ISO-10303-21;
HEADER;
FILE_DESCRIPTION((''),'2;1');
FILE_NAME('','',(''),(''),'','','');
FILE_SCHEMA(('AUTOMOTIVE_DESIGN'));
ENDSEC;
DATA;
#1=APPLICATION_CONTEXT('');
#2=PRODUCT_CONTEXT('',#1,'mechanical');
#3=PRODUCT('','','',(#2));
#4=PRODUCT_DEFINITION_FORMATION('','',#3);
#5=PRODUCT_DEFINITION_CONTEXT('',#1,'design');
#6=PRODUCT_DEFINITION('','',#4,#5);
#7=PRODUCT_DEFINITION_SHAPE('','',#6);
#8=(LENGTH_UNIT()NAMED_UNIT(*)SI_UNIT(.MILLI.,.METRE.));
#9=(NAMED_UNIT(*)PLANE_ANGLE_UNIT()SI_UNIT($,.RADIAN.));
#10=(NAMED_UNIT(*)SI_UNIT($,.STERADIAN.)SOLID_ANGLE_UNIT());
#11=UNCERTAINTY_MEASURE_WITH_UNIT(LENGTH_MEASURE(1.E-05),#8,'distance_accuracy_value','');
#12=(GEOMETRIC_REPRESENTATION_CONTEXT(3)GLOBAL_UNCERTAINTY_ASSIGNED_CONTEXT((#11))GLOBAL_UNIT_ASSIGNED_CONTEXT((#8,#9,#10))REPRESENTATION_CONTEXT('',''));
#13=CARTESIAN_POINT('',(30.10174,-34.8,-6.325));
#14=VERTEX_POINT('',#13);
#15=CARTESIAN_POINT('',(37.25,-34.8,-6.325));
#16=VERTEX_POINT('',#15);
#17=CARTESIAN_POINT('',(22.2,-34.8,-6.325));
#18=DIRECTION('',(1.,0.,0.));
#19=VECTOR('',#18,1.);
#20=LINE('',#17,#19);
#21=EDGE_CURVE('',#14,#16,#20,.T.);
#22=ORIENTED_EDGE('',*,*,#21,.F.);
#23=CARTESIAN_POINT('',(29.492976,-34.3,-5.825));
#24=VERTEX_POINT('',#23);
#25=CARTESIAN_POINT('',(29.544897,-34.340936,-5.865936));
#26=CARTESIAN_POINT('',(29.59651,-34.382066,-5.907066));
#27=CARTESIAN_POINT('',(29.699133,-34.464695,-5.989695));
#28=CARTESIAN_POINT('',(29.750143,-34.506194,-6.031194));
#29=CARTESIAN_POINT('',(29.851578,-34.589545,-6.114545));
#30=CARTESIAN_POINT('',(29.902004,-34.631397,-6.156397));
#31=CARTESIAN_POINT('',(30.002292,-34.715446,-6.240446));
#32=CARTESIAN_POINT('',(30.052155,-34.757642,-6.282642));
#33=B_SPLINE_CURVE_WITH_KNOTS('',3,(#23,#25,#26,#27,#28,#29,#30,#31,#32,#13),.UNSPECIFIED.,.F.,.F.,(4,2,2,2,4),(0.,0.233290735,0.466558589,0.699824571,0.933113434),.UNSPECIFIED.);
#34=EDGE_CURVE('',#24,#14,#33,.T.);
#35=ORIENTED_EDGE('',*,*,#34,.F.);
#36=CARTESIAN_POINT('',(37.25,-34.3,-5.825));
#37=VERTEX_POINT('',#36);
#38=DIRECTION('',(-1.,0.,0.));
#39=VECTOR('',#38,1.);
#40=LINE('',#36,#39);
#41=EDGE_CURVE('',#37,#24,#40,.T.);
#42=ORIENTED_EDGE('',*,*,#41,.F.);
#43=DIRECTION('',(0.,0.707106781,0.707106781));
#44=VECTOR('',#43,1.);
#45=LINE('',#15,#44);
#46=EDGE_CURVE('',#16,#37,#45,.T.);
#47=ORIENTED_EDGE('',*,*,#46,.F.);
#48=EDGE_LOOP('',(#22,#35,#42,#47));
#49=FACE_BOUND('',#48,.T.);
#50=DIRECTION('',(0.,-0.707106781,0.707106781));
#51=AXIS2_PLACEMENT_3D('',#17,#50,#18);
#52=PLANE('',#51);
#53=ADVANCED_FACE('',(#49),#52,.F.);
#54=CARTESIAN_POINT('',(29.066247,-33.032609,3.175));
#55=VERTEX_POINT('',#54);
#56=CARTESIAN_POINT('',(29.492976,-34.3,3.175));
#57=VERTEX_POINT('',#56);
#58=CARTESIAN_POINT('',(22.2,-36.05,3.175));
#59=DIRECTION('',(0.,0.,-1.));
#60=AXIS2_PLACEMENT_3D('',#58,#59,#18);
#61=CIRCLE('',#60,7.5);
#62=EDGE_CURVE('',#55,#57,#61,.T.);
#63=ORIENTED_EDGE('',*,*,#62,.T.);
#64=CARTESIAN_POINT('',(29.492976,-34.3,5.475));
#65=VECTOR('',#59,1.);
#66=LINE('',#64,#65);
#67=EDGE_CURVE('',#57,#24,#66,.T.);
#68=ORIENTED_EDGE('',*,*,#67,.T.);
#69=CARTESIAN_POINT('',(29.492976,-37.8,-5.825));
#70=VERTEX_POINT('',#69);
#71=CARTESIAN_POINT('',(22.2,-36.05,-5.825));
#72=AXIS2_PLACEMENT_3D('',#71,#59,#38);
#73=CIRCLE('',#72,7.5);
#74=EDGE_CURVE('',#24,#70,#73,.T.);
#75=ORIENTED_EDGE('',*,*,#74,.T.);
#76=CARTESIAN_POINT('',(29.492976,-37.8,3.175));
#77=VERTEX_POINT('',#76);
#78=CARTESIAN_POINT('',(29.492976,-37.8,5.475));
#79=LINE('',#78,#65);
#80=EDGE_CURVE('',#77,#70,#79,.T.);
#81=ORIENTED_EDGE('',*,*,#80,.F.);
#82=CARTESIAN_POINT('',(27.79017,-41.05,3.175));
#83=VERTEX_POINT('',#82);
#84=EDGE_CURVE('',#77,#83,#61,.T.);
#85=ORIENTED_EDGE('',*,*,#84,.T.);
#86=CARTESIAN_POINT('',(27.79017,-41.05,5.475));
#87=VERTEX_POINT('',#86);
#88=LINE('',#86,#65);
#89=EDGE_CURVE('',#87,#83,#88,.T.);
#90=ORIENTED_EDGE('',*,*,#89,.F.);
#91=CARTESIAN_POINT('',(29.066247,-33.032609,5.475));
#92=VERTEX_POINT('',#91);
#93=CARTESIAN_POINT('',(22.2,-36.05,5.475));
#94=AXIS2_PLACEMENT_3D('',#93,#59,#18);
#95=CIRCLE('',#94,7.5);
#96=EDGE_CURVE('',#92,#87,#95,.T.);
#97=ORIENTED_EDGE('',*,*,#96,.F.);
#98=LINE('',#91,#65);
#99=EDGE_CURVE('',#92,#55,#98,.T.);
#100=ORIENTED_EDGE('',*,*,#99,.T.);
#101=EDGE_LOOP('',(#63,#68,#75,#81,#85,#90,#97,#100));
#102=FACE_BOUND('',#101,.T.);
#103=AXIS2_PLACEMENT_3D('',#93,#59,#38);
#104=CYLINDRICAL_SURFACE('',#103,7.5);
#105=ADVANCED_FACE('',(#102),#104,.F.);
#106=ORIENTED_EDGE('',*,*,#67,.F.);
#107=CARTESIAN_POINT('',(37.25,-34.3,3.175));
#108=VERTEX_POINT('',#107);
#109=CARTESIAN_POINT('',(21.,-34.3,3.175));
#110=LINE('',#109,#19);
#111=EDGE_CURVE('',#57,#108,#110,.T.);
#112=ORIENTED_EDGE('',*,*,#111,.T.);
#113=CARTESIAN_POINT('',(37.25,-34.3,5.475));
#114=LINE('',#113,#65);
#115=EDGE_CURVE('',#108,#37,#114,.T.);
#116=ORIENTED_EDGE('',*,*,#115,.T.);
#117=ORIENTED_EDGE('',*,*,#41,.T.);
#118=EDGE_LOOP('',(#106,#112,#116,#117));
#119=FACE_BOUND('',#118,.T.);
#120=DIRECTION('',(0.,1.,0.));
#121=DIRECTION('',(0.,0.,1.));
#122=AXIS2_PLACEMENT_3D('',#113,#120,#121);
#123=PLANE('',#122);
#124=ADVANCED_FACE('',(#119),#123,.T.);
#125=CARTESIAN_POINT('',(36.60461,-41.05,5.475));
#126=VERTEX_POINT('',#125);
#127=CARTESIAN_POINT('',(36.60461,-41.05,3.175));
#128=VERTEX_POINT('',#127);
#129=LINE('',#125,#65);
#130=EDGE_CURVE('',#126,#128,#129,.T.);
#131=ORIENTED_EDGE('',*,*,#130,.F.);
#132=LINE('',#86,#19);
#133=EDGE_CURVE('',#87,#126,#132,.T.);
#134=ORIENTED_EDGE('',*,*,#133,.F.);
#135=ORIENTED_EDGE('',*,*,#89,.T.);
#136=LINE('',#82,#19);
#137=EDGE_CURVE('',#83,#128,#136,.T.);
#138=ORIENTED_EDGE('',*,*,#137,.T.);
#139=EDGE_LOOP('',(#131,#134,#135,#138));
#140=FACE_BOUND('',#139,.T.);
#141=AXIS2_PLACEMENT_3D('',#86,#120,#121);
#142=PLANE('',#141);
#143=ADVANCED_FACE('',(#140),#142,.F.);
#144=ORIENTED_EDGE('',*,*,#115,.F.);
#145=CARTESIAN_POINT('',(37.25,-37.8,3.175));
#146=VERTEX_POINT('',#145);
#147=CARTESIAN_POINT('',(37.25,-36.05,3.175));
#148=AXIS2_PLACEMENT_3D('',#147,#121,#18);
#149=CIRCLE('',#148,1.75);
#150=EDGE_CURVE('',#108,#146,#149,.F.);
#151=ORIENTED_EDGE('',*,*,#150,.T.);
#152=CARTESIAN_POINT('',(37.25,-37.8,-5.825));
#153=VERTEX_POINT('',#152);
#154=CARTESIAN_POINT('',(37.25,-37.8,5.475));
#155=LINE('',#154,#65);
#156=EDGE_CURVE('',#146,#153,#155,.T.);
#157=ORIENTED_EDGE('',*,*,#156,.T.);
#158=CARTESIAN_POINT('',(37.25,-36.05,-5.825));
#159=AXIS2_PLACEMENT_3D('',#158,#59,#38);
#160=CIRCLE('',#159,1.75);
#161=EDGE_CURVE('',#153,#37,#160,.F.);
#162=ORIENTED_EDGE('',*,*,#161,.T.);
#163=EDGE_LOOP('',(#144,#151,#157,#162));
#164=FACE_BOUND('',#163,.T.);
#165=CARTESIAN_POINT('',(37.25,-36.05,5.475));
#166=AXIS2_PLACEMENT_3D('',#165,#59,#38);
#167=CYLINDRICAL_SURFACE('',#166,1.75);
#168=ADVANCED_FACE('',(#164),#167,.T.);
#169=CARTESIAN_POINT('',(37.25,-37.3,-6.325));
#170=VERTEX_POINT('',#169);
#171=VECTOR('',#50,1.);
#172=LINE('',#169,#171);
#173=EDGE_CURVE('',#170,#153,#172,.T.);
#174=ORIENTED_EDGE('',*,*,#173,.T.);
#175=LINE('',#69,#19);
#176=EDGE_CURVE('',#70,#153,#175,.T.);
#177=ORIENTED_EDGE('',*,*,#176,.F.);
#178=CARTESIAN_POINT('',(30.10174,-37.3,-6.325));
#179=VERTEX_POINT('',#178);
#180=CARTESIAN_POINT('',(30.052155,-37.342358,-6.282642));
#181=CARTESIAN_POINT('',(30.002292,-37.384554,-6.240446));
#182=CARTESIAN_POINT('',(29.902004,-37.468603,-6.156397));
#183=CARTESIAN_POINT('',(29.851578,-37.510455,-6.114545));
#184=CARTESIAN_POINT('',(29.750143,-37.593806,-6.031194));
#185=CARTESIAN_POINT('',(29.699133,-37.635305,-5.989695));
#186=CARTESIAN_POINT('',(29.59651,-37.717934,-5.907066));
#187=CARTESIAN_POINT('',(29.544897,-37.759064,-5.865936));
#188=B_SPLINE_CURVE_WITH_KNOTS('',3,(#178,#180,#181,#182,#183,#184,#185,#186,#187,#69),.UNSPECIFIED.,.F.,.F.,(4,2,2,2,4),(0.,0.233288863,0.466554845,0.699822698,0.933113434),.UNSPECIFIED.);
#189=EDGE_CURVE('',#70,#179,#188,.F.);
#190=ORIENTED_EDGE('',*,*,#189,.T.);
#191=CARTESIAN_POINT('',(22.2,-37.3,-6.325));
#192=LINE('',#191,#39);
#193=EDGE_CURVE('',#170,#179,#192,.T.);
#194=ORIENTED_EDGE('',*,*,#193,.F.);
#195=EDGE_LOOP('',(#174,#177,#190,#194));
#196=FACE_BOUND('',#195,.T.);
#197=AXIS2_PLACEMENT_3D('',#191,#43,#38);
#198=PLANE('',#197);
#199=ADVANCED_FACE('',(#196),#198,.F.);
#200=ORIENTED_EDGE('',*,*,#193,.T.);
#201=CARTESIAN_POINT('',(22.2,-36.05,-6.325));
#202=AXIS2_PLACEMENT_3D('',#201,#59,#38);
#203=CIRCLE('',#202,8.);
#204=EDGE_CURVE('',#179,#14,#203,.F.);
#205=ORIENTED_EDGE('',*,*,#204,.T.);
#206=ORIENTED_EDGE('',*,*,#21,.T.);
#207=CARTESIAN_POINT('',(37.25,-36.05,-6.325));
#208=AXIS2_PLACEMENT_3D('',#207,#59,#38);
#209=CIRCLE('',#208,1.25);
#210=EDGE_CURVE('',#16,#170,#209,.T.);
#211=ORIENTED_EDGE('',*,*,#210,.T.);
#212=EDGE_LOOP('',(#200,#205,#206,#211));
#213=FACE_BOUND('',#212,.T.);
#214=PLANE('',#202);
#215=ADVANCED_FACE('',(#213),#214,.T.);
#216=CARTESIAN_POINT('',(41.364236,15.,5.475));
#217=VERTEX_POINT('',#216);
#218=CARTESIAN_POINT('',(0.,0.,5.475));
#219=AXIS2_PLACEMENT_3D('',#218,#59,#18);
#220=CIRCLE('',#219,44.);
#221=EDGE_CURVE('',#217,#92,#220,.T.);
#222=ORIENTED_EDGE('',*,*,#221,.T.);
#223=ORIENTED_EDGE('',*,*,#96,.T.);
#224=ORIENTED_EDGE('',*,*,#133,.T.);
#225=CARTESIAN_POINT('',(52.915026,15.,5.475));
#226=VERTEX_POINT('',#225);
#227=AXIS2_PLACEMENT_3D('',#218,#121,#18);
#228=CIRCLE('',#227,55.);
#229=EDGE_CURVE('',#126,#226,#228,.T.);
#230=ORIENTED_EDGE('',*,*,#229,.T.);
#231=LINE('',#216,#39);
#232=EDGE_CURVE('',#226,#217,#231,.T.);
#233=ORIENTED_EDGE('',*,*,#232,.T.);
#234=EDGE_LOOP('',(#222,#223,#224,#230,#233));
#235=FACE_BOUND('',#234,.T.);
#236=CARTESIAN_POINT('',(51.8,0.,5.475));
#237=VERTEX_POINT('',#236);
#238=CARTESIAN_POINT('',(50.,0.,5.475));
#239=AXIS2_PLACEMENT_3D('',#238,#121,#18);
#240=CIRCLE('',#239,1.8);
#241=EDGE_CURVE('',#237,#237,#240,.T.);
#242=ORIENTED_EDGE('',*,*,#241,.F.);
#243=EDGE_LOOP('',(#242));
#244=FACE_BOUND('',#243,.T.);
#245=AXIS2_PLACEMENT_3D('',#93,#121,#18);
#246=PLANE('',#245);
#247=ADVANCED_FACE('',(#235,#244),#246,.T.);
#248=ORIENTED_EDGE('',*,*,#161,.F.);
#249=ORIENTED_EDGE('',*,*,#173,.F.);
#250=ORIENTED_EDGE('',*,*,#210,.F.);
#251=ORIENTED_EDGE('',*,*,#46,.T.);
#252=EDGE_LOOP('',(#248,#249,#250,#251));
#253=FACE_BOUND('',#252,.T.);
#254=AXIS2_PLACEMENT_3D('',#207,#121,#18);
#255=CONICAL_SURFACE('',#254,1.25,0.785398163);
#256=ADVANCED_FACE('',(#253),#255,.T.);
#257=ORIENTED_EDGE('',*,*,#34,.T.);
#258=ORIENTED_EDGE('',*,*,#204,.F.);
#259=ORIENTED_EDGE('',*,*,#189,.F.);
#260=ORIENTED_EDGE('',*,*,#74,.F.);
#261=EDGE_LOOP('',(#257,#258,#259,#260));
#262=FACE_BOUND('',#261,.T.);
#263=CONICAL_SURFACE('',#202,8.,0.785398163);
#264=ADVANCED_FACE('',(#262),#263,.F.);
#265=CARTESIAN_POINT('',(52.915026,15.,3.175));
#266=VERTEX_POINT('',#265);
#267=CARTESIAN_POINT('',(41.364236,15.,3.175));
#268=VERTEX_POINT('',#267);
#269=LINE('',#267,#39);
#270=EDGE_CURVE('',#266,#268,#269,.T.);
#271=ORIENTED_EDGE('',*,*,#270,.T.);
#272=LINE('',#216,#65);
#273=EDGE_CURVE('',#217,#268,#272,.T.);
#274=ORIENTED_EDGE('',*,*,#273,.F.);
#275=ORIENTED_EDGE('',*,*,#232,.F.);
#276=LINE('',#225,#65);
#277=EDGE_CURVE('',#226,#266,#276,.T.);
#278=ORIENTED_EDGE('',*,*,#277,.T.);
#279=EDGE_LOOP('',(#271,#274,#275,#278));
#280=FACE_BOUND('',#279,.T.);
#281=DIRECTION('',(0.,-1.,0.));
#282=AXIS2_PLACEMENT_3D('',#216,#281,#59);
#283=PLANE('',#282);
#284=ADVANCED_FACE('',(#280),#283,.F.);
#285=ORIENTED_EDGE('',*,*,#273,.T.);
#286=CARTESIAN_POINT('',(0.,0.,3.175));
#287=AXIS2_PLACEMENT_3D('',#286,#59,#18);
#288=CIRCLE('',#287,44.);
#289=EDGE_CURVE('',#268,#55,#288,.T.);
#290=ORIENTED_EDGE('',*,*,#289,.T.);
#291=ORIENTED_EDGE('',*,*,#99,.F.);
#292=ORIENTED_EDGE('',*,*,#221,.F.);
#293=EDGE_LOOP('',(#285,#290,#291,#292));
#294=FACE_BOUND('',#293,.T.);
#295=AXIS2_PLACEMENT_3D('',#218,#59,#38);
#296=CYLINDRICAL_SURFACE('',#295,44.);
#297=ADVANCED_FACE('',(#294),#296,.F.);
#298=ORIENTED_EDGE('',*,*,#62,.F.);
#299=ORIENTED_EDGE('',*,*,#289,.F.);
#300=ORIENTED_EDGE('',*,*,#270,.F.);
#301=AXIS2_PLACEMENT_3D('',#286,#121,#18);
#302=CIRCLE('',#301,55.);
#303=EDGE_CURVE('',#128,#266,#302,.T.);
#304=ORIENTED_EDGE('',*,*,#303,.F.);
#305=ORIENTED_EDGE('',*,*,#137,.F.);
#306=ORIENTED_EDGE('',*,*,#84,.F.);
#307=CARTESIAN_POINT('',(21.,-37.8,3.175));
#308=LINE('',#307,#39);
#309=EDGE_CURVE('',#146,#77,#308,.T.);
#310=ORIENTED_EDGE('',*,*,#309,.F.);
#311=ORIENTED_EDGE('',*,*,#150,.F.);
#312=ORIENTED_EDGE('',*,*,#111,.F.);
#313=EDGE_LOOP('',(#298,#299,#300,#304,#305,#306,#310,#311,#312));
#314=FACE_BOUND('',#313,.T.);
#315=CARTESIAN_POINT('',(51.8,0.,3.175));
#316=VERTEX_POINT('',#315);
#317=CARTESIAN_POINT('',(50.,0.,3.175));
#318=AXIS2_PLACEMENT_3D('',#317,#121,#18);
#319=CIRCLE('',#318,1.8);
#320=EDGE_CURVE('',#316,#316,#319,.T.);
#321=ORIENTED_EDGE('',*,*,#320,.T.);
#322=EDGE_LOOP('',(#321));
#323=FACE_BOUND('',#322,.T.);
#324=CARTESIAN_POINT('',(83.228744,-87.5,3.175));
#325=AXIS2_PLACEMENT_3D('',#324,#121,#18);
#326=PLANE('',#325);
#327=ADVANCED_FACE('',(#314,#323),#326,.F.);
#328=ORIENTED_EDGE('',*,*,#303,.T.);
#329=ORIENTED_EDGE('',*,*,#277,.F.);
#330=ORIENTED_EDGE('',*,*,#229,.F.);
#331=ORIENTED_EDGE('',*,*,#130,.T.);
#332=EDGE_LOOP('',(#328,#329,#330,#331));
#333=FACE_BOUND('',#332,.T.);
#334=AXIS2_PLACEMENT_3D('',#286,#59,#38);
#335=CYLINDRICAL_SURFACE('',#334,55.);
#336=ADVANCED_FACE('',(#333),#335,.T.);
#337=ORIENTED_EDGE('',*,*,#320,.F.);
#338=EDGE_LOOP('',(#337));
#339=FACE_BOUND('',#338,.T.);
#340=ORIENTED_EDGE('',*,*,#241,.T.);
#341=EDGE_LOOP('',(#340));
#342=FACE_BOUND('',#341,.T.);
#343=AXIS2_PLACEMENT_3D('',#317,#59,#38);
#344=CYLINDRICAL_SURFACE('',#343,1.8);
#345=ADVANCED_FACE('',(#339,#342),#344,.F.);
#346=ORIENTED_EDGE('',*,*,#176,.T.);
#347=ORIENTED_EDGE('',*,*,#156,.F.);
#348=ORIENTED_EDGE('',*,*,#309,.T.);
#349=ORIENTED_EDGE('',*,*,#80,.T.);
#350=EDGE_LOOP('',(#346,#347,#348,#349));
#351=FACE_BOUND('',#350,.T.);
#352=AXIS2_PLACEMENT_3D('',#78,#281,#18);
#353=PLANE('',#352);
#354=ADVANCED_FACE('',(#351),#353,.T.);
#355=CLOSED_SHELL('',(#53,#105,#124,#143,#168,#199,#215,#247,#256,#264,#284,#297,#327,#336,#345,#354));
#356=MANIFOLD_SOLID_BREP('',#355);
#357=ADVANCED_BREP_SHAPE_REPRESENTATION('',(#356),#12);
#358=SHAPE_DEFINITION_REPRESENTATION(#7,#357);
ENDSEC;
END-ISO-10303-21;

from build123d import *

# Parameters (mm, degrees)
SKETCH1_R                = 2.150000002
SKETCH1_R_2              = 35
SKETCH1_R_3              = 1.8
SKETCH1_R_4              = 7.575
BOSS_EXTRUDE1_DEPTH      = 3.175
SKETCH3_R                = 1.35
SKETCH3_R_2              = 5
SKETCH3_W                = 18
SKETCH3_H                = 3.5
CUT_EXTRUDE1_DEPTH       = 3.175
CUT_EXTRUDE2_DEPTH       = 3.175
SKETCH6_R                = 7.5
CUT_EXTRUDE5_DEPTH       = 10
FILLET1_R                = 1.75
SKETCH7_R                = 1.75
CUT_EXTRUDE6_DEPTH       = 10
SKETCH10_R               = 1.8
BOSS_EXTRUDE2_DEPTH      = 2.3
CUT_EXTRUDE7_DEPTH       = 118.49445714
CUT_EXTRUDE7_DEPTH_BACK  = 118.49445714
SKETCH11_W               = 179.014242855
SKETCH11_H               = 40.200555742
BOSS_EXTRUDE3_DEPTH      = 9.5
BOSS_EXTRUDE3_DEPTH_BACK = 2.3
CHAMFER1_SIZE            = 0.5


with BuildPart() as part:
    # Sketch1 → Boss-Extrude1 (new body)
    with BuildSketch(Plane.XY):
        with BuildLine():
            Line((69.097259206, -18.820036388), (54.057762213, -10.136978751))
            ThreePointArc((54.057762213, -10.136978751), (47.631397163, 27.499999965), (18.250000006, 51.883884719))
            Line((18.250000006, 51.883884719), (18.250000006, 69.249999994))
            ThreePointArc((18.250000006, 69.249999994), (6e-09, 87.499999994), (-18.249999994, 69.249999994))
            Line((-18.249999994, 69.249999994), (-18.249999994, 51.883884717))
            ThreePointArc((-18.249999994, 51.883884717), (-47.836716311, 27.141270525), (-53.899300523, -10.948305635))
            Line((-53.899300523, -10.948305635), (-69.097259204, -18.820036383))
            ThreePointArc((-69.097259204, -18.820036383), (-77.600405532, -29.901552426), (-75.777222821, -43.749999994))
            ThreePointArc((-75.777222821, -43.749999994), (0, -87.499999989), (75.777222821, -43.749999994))
            ThreePointArc((75.777222821, -43.749999994), (77.60040553, -29.901552429), (69.097259206, -18.820036388))
        make_face()
        with Locations((-7.778174593, 77.028174587)):
            Circle(SKETCH1_R, mode=Mode.SUBTRACT)
        Circle(SKETCH1_R_2, mode=Mode.SUBTRACT)
        with Locations((-50, 0)):
            Circle(SKETCH1_R_3, mode=Mode.SUBTRACT)
        with Locations((-25, 43.301270189)):
            Circle(SKETCH1_R_3, mode=Mode.SUBTRACT)
        with Locations((25, 43.301270189)):
            Circle(SKETCH1_R_3, mode=Mode.SUBTRACT)
        with Locations((50, 0)):
            Circle(SKETCH1_R_3, mode=Mode.SUBTRACT)
        with Locations((25, -43.301270189)):
            Circle(SKETCH1_R_3, mode=Mode.SUBTRACT)
        with Locations((-25, -43.301270189)):
            Circle(SKETCH1_R_3, mode=Mode.SUBTRACT)
        with Locations((7.778174587, 77.028174593)):
            Circle(SKETCH1_R, mode=Mode.SUBTRACT)
        with Locations((7.778174593, 61.471825413)):
            Circle(SKETCH1_R, mode=Mode.SUBTRACT)
        with Locations((-7.778174587, 61.471825407)):
            Circle(SKETCH1_R, mode=Mode.SUBTRACT)
        with Locations((62.819268711, -45.250184084)):
            Circle(SKETCH1_R, mode=Mode.SUBTRACT)
        with Locations((49.347075128, -37.472009499)):
            Circle(SKETCH1_R, mode=Mode.SUBTRACT)
        with Locations((57.125249713, -23.999815916)):
            Circle(SKETCH1_R, mode=Mode.SUBTRACT)
        with Locations((70.597443296, -31.777990501)):
            Circle(SKETCH1_R, mode=Mode.SUBTRACT)
        with Locations((-70.597443298, -31.777990509)):
            Circle(SKETCH1_R, mode=Mode.SUBTRACT)
        with Locations((-57.125249721, -23.999815914)):
            Circle(SKETCH1_R, mode=Mode.SUBTRACT)
        with Locations((-49.347075126, -37.472009491)):
            Circle(SKETCH1_R, mode=Mode.SUBTRACT)
        with Locations((-62.819268703, -45.250184086)):
            Circle(SKETCH1_R, mode=Mode.SUBTRACT)
        with Locations((0, 69.249999994)):
            Circle(SKETCH1_R_4, mode=Mode.SUBTRACT)
        with Locations((59.972259207, -34.624999997)):
            Circle(SKETCH1_R_4, mode=Mode.SUBTRACT)
        with Locations((-59.972259207, -34.624999997)):
            Circle(SKETCH1_R_4, mode=Mode.SUBTRACT)
    extrude(amount=BOSS_EXTRUDE1_DEPTH)

    # Sketch3 → Cut-Extrude1 (cut)
    with BuildSketch(Plane.XY.offset(3.175)):
        with Locations((-33.85, -49)):
            Circle(SKETCH3_R)
        with Locations((-33.85, -75)):
            Circle(SKETCH3_R)
        with Locations((41.45, -46.7)):
            Circle(SKETCH3_R)
        with Locations((49.972259207, -51.945508073)):
            Circle(SKETCH3_R_2)
        with Locations((48.55, -69)):
            Circle(SKETCH3_R)
        with Locations((30, -36.05)):
            Rectangle(SKETCH3_W, SKETCH3_H)
    extrude(amount=-CUT_EXTRUDE1_DEPTH, mode=Mode.SUBTRACT)

    # Sketch4 → Cut-Extrude2 (cut)
    with BuildSketch(Plane.XY.offset(3.175)):
        Polygon((-18.902035191, 65.231994187), (-24.642286676, 79.090187175), (-38.500479664, 73.349935689), (-32.760228178, 59.491742702), align=None)
        Polygon((-47.04154651, -48.985639752), (-56.172967945, -60.885939856), (-63.507557332, -70.444562845), (-51.607257228, -79.57598428), (-44.272667841, -70.017361292), (-35.141246406, -58.117061187), align=None)
        Polygon((65.943581701, -16.246354435), (80.815254622, -18.204247318), (82.773147505, -3.332574398), (67.901474584, -1.374681515), align=None)
    extrude(amount=-CUT_EXTRUDE2_DEPTH, mode=Mode.SUBTRACT)

    # Sketch6 → Cut-Extrude5 (cut)
    with BuildSketch(Plane.XY):
        with Locations((20, 69.25)):
            Circle(SKETCH6_R)
        with Locations((-69.972259212, -17.304491924)):
            Circle(SKETCH6_R)
    extrude(amount=CUT_EXTRUDE5_DEPTH, mode=Mode.SUBTRACT)

    # Fillet1
    fillet1_edges = [part.edges().sort_by_distance(p)[0] for p in [
        (21, -37.8, 1.5875),
        (39, -37.8, 1.5875),
        (39, -34.3, 1.5875),
        (21, -34.3, 1.5875),
    ]]
    fillet(fillet1_edges, radius=FILLET1_R - 0.0001)  # a hair under: the kernel refuses the full size

    # Sketch7 → Cut-Extrude6 (cut)
    with BuildSketch(Plane.XY.offset(3.175)):
        with Locations((-43, 10)):
            Circle(SKETCH7_R)
        with Locations((-43, -10)):
            Circle(SKETCH7_R)
    extrude(amount=-CUT_EXTRUDE6_DEPTH, mode=Mode.SUBTRACT)

    # Sketch10 → Boss-Extrude2 (add)
    with BuildSketch(Plane.XY.offset(3.175)):
        with BuildLine():
            Line((29.492976073, -37.8), (37.25, -37.8))
            ThreePointArc((37.25, -37.8), (38.487436867, -37.287436867), (39, -36.05))
            ThreePointArc((39, -36.05), (38.487436867, -34.812563133), (37.25, -34.3))
            Line((37.25, -34.3), (29.492976073, -34.3))
            ThreePointArc((29.492976073, -34.3), (29.307916131, -33.656774505), (29.066247328, -33.032609135))
            ThreePointArc((29.066247328, -33.032609135), (42.625064482, -10.913472313), (41.36423576, 15))
            Line((41.36423576, 15), (52.915026221, 15))
            ThreePointArc((52.915026221, 15), (52.809487392, -15.367434443), (36.604610365, -41.05))
            Line((36.604610365, -41.05), (27.790169944, -41.05))
            ThreePointArc((27.790169944, -41.05), (28.843379247, -39.530734431), (29.492976073, -37.8))
        make_face()
        with Locations((50, 0)):
            Circle(SKETCH10_R, mode=Mode.SUBTRACT)
    extrude(amount=BOSS_EXTRUDE2_DEPTH)

    # Sketch11 → Cut-Extrude7 (cut, two sides: drawn at the far end of the back side and taken through both)
    with BuildSketch(Plane(origin=(0, 0, 0), x_dir=(1, 0, 0), z_dir=(0, 1, 0)).offset(-CUT_EXTRUDE7_DEPTH_BACK)):
        with Locations((-6.278377224, 16.925277871)):
            Rectangle(SKETCH11_W, SKETCH11_H)
    extrude(amount=CUT_EXTRUDE7_DEPTH + CUT_EXTRUDE7_DEPTH_BACK, mode=Mode.SUBTRACT)

    # Sketch12 → Boss-Extrude3 (add, two sides: drawn at the far end of the back side and taken through both)
    with BuildSketch(Plane(origin=(0, 0, 3.175), x_dir=(-1, 0, 0), z_dir=(0, 0, -1)).offset(-BOSS_EXTRUDE3_DEPTH_BACK)):
        with BuildLine():
            Line((-29.492976073, -37.8), (-37.25, -37.8))
            ThreePointArc((-37.25, -37.8), (-38.487436867, -37.287436867), (-39, -36.05))
            ThreePointArc((-39, -36.05), (-38.487436867, -34.812563133), (-37.25, -34.3))
            Line((-37.25, -34.3), (-29.492976073, -34.3))
            ThreePointArc((-29.492976073, -34.3), (-29.7, -36.05), (-29.492976073, -37.8))
        make_face()
    extrude(amount=BOSS_EXTRUDE3_DEPTH + BOSS_EXTRUDE3_DEPTH_BACK)

    # Chamfer1
    chamfer1_edges = [part.edges().sort_by_distance(p)[0] for p in [
        (29.7, -36.05, -6.325),
        (33.371488036, -34.3, -6.325),
        (39, -36.05, -6.325),
        (33.371488036, -37.8, -6.325),
    ]]
    chamfer(chamfer1_edges, length=CHAMFER1_SIZE)


solid = part.part
